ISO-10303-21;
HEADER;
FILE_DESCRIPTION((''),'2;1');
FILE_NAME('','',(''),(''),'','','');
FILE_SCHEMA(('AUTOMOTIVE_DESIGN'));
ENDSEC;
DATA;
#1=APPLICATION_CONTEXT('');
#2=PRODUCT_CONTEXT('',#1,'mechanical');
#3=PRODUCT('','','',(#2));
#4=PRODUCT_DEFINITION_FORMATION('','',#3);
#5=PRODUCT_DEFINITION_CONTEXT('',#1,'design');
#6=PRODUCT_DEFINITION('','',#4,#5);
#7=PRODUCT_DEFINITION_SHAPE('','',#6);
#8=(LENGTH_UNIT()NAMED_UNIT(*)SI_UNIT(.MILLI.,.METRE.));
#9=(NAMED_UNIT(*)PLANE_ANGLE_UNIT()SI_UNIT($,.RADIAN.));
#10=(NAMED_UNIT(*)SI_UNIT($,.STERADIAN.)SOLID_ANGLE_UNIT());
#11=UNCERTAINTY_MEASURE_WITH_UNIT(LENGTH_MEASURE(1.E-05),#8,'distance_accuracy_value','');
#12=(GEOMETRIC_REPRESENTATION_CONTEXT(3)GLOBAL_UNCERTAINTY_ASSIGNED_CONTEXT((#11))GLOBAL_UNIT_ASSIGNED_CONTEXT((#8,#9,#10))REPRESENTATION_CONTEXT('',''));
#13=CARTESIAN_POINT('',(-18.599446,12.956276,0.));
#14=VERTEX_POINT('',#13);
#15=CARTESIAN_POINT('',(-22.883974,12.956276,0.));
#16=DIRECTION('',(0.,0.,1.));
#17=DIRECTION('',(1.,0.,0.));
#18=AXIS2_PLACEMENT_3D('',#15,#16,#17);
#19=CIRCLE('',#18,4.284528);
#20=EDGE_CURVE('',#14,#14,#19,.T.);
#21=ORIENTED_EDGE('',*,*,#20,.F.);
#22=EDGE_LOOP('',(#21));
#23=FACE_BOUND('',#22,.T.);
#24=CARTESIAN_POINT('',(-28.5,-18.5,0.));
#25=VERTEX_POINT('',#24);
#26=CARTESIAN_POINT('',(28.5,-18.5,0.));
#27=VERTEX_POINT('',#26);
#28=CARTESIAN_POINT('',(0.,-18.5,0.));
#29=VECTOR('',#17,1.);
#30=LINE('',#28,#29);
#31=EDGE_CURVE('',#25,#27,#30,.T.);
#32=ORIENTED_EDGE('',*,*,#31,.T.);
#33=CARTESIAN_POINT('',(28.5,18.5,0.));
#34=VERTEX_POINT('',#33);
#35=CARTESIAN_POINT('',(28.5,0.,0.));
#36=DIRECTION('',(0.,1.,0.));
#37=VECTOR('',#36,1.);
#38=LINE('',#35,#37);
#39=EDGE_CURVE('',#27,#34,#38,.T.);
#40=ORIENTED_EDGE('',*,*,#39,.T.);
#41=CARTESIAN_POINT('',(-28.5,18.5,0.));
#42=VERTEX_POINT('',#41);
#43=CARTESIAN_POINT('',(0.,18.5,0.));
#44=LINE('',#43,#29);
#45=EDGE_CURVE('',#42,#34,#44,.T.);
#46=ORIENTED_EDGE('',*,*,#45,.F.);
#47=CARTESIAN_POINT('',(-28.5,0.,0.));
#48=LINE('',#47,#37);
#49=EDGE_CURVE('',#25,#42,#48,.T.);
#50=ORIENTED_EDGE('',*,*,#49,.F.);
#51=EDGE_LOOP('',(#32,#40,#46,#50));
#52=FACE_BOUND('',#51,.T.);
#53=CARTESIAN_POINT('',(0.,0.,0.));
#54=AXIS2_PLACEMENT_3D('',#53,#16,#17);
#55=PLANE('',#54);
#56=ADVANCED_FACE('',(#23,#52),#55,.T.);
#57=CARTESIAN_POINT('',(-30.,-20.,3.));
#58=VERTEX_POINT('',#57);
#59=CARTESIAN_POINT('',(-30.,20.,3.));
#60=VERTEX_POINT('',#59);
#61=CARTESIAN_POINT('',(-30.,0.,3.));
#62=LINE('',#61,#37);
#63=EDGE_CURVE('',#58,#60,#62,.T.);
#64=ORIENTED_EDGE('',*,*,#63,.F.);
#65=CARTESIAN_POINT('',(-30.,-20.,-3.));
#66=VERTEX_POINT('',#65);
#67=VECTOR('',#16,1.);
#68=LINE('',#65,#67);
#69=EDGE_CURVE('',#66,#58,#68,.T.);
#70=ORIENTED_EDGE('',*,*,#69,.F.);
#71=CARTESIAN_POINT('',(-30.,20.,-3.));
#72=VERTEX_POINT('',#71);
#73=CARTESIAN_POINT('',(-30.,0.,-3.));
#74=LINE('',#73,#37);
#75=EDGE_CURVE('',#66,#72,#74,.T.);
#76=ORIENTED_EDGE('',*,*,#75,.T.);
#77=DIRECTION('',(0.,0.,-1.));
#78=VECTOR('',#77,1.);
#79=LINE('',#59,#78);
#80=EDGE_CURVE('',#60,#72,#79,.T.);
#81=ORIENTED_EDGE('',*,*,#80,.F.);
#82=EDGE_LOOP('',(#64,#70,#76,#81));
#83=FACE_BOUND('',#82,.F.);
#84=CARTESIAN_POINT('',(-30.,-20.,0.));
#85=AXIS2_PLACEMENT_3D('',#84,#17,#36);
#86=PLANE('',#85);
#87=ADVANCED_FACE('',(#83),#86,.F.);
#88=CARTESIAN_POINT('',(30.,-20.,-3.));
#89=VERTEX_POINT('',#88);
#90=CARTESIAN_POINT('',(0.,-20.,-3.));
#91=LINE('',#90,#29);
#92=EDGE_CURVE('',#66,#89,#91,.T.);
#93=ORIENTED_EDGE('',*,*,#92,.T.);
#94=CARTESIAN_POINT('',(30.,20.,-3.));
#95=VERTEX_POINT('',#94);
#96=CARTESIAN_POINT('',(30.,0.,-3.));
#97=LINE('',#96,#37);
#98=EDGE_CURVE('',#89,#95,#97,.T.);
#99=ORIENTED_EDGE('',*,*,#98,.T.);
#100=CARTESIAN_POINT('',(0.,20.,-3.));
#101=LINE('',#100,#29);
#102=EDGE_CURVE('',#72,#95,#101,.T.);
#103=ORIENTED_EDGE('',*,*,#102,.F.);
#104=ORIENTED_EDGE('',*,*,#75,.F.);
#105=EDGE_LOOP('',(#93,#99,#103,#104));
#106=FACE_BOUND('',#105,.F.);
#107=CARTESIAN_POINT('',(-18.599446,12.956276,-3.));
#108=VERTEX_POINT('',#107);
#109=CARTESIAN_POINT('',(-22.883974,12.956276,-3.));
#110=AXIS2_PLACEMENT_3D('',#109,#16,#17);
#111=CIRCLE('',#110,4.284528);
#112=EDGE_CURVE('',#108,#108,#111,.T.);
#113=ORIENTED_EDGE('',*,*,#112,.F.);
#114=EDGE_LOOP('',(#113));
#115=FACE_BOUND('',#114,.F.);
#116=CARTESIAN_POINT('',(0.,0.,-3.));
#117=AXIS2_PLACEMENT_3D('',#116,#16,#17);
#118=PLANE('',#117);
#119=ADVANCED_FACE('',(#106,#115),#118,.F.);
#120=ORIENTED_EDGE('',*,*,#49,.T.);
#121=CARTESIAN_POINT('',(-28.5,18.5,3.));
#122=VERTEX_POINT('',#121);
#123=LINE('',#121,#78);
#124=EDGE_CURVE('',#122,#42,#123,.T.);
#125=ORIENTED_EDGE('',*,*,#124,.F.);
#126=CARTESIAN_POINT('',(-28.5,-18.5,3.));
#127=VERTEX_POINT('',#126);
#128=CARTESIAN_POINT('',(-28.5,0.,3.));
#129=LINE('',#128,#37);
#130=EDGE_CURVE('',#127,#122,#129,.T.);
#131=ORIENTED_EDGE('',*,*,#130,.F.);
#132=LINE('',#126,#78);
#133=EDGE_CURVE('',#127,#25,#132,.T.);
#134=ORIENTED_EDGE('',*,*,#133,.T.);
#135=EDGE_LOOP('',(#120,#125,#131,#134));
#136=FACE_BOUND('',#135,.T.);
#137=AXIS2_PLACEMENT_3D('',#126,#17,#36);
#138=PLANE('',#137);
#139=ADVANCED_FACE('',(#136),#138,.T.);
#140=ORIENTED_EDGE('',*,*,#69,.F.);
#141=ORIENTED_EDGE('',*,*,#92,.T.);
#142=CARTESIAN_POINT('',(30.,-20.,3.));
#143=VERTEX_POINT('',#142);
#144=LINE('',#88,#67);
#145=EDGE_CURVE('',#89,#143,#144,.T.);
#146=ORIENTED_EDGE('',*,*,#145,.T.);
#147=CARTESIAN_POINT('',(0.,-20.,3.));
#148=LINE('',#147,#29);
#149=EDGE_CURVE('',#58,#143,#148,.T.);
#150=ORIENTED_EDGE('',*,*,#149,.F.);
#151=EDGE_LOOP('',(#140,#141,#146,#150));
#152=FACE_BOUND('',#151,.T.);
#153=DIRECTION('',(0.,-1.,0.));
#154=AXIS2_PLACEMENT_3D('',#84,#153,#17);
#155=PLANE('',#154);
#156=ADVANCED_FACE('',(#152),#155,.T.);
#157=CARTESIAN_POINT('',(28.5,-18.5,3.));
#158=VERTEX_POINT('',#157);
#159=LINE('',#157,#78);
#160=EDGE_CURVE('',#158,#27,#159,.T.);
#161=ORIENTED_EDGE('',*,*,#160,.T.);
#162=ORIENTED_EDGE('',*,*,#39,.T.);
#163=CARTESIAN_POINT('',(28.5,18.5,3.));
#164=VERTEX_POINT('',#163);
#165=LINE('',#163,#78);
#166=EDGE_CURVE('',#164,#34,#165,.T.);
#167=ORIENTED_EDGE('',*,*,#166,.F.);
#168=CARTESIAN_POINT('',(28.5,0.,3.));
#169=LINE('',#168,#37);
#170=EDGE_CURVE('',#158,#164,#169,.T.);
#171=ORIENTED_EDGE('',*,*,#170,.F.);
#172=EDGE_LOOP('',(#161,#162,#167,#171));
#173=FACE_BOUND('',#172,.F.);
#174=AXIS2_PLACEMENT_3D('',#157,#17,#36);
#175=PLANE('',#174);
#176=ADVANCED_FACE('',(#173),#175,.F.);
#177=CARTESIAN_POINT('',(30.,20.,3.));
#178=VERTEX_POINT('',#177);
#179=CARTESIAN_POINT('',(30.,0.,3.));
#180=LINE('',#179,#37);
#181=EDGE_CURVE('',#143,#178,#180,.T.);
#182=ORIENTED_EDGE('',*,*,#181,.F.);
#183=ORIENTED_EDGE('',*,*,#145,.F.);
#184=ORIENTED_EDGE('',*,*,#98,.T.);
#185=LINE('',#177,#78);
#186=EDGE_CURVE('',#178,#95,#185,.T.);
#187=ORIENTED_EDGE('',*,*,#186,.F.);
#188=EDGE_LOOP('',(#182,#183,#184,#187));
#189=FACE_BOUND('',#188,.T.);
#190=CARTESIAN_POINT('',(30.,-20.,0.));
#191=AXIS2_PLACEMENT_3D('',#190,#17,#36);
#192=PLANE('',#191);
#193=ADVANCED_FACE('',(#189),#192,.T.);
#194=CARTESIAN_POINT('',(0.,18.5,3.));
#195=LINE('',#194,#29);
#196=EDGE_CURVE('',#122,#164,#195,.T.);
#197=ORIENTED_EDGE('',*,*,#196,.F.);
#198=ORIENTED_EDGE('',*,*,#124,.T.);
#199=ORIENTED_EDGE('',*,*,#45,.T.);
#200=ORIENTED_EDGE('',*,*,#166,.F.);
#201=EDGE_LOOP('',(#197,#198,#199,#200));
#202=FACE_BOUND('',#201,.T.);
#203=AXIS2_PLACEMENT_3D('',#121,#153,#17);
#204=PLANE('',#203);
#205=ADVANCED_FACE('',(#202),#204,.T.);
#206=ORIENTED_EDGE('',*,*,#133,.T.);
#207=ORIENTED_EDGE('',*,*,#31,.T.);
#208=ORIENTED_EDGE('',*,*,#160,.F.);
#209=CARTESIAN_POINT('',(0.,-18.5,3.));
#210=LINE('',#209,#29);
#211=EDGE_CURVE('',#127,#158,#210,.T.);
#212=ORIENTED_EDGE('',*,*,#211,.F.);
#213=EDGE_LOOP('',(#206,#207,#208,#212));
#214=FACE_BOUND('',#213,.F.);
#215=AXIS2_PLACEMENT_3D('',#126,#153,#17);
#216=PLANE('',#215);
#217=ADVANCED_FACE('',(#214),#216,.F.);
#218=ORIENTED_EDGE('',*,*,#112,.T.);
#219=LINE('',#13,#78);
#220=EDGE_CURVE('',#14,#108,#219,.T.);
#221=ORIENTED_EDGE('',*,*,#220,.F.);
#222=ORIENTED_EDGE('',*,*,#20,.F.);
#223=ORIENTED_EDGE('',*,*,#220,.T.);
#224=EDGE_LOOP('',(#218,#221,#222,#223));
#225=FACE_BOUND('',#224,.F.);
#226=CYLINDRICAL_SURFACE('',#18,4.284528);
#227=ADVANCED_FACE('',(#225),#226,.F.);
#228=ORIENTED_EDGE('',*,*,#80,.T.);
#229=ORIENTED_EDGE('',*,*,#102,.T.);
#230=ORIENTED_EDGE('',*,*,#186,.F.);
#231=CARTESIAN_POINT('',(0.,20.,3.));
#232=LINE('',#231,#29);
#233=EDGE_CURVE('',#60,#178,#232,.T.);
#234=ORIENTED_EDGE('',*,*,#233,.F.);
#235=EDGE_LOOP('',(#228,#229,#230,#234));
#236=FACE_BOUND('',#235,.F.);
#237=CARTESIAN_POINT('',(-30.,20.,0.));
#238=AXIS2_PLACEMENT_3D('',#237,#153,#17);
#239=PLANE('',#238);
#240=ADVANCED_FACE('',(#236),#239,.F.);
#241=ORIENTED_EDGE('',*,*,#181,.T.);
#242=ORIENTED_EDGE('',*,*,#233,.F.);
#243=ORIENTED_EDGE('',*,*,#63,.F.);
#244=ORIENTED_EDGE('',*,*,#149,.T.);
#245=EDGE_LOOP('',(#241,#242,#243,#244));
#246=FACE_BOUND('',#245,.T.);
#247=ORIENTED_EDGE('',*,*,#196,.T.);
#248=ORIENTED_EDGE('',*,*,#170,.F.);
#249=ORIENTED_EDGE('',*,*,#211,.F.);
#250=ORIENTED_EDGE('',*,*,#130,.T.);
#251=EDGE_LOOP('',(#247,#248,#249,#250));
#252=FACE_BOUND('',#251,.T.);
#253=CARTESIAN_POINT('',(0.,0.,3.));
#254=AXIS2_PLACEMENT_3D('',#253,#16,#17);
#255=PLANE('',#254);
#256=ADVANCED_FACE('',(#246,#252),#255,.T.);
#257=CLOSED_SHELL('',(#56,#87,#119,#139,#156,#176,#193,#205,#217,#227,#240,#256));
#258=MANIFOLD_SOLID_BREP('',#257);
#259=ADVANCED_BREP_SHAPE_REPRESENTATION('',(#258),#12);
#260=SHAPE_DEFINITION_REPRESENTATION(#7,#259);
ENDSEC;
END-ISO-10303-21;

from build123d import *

# Parameters (mm, degrees)
F0_W     = 60
F0_H     = 40
F1_DEPTH = 3
F2_W     = 57
F2_H     = 37
F3_DEPTH = 3
F6_R     = 4.2845281604
F7_DEPTH = 6


# Not quite as in the source:
# - the program builds the solid bodies; features that only make, move or delete a surface that nothing else refers to are left out


with BuildPart() as f1:
    # F0 (on Top) → F1 (new body, symmetric)
    with BuildSketch(Plane.XY):
        Rectangle(F0_W, F0_H)
    extrude(amount=F1_DEPTH, both=True)

    # F2 (on face) → F3 (cut)
    with BuildSketch(Plane.XY.offset(3)):
        Rectangle(F2_W, F2_H)
    extrude(amount=-F3_DEPTH, mode=Mode.SUBTRACT)

    # F6 (on face) → F7 (cut)
    with BuildSketch(Plane.XY):
        with Locations((-22.8839740157, 12.9562756047)):
            Circle(F6_R)
    extrude(amount=-F7_DEPTH, mode=Mode.SUBTRACT)


solid = f1.part
